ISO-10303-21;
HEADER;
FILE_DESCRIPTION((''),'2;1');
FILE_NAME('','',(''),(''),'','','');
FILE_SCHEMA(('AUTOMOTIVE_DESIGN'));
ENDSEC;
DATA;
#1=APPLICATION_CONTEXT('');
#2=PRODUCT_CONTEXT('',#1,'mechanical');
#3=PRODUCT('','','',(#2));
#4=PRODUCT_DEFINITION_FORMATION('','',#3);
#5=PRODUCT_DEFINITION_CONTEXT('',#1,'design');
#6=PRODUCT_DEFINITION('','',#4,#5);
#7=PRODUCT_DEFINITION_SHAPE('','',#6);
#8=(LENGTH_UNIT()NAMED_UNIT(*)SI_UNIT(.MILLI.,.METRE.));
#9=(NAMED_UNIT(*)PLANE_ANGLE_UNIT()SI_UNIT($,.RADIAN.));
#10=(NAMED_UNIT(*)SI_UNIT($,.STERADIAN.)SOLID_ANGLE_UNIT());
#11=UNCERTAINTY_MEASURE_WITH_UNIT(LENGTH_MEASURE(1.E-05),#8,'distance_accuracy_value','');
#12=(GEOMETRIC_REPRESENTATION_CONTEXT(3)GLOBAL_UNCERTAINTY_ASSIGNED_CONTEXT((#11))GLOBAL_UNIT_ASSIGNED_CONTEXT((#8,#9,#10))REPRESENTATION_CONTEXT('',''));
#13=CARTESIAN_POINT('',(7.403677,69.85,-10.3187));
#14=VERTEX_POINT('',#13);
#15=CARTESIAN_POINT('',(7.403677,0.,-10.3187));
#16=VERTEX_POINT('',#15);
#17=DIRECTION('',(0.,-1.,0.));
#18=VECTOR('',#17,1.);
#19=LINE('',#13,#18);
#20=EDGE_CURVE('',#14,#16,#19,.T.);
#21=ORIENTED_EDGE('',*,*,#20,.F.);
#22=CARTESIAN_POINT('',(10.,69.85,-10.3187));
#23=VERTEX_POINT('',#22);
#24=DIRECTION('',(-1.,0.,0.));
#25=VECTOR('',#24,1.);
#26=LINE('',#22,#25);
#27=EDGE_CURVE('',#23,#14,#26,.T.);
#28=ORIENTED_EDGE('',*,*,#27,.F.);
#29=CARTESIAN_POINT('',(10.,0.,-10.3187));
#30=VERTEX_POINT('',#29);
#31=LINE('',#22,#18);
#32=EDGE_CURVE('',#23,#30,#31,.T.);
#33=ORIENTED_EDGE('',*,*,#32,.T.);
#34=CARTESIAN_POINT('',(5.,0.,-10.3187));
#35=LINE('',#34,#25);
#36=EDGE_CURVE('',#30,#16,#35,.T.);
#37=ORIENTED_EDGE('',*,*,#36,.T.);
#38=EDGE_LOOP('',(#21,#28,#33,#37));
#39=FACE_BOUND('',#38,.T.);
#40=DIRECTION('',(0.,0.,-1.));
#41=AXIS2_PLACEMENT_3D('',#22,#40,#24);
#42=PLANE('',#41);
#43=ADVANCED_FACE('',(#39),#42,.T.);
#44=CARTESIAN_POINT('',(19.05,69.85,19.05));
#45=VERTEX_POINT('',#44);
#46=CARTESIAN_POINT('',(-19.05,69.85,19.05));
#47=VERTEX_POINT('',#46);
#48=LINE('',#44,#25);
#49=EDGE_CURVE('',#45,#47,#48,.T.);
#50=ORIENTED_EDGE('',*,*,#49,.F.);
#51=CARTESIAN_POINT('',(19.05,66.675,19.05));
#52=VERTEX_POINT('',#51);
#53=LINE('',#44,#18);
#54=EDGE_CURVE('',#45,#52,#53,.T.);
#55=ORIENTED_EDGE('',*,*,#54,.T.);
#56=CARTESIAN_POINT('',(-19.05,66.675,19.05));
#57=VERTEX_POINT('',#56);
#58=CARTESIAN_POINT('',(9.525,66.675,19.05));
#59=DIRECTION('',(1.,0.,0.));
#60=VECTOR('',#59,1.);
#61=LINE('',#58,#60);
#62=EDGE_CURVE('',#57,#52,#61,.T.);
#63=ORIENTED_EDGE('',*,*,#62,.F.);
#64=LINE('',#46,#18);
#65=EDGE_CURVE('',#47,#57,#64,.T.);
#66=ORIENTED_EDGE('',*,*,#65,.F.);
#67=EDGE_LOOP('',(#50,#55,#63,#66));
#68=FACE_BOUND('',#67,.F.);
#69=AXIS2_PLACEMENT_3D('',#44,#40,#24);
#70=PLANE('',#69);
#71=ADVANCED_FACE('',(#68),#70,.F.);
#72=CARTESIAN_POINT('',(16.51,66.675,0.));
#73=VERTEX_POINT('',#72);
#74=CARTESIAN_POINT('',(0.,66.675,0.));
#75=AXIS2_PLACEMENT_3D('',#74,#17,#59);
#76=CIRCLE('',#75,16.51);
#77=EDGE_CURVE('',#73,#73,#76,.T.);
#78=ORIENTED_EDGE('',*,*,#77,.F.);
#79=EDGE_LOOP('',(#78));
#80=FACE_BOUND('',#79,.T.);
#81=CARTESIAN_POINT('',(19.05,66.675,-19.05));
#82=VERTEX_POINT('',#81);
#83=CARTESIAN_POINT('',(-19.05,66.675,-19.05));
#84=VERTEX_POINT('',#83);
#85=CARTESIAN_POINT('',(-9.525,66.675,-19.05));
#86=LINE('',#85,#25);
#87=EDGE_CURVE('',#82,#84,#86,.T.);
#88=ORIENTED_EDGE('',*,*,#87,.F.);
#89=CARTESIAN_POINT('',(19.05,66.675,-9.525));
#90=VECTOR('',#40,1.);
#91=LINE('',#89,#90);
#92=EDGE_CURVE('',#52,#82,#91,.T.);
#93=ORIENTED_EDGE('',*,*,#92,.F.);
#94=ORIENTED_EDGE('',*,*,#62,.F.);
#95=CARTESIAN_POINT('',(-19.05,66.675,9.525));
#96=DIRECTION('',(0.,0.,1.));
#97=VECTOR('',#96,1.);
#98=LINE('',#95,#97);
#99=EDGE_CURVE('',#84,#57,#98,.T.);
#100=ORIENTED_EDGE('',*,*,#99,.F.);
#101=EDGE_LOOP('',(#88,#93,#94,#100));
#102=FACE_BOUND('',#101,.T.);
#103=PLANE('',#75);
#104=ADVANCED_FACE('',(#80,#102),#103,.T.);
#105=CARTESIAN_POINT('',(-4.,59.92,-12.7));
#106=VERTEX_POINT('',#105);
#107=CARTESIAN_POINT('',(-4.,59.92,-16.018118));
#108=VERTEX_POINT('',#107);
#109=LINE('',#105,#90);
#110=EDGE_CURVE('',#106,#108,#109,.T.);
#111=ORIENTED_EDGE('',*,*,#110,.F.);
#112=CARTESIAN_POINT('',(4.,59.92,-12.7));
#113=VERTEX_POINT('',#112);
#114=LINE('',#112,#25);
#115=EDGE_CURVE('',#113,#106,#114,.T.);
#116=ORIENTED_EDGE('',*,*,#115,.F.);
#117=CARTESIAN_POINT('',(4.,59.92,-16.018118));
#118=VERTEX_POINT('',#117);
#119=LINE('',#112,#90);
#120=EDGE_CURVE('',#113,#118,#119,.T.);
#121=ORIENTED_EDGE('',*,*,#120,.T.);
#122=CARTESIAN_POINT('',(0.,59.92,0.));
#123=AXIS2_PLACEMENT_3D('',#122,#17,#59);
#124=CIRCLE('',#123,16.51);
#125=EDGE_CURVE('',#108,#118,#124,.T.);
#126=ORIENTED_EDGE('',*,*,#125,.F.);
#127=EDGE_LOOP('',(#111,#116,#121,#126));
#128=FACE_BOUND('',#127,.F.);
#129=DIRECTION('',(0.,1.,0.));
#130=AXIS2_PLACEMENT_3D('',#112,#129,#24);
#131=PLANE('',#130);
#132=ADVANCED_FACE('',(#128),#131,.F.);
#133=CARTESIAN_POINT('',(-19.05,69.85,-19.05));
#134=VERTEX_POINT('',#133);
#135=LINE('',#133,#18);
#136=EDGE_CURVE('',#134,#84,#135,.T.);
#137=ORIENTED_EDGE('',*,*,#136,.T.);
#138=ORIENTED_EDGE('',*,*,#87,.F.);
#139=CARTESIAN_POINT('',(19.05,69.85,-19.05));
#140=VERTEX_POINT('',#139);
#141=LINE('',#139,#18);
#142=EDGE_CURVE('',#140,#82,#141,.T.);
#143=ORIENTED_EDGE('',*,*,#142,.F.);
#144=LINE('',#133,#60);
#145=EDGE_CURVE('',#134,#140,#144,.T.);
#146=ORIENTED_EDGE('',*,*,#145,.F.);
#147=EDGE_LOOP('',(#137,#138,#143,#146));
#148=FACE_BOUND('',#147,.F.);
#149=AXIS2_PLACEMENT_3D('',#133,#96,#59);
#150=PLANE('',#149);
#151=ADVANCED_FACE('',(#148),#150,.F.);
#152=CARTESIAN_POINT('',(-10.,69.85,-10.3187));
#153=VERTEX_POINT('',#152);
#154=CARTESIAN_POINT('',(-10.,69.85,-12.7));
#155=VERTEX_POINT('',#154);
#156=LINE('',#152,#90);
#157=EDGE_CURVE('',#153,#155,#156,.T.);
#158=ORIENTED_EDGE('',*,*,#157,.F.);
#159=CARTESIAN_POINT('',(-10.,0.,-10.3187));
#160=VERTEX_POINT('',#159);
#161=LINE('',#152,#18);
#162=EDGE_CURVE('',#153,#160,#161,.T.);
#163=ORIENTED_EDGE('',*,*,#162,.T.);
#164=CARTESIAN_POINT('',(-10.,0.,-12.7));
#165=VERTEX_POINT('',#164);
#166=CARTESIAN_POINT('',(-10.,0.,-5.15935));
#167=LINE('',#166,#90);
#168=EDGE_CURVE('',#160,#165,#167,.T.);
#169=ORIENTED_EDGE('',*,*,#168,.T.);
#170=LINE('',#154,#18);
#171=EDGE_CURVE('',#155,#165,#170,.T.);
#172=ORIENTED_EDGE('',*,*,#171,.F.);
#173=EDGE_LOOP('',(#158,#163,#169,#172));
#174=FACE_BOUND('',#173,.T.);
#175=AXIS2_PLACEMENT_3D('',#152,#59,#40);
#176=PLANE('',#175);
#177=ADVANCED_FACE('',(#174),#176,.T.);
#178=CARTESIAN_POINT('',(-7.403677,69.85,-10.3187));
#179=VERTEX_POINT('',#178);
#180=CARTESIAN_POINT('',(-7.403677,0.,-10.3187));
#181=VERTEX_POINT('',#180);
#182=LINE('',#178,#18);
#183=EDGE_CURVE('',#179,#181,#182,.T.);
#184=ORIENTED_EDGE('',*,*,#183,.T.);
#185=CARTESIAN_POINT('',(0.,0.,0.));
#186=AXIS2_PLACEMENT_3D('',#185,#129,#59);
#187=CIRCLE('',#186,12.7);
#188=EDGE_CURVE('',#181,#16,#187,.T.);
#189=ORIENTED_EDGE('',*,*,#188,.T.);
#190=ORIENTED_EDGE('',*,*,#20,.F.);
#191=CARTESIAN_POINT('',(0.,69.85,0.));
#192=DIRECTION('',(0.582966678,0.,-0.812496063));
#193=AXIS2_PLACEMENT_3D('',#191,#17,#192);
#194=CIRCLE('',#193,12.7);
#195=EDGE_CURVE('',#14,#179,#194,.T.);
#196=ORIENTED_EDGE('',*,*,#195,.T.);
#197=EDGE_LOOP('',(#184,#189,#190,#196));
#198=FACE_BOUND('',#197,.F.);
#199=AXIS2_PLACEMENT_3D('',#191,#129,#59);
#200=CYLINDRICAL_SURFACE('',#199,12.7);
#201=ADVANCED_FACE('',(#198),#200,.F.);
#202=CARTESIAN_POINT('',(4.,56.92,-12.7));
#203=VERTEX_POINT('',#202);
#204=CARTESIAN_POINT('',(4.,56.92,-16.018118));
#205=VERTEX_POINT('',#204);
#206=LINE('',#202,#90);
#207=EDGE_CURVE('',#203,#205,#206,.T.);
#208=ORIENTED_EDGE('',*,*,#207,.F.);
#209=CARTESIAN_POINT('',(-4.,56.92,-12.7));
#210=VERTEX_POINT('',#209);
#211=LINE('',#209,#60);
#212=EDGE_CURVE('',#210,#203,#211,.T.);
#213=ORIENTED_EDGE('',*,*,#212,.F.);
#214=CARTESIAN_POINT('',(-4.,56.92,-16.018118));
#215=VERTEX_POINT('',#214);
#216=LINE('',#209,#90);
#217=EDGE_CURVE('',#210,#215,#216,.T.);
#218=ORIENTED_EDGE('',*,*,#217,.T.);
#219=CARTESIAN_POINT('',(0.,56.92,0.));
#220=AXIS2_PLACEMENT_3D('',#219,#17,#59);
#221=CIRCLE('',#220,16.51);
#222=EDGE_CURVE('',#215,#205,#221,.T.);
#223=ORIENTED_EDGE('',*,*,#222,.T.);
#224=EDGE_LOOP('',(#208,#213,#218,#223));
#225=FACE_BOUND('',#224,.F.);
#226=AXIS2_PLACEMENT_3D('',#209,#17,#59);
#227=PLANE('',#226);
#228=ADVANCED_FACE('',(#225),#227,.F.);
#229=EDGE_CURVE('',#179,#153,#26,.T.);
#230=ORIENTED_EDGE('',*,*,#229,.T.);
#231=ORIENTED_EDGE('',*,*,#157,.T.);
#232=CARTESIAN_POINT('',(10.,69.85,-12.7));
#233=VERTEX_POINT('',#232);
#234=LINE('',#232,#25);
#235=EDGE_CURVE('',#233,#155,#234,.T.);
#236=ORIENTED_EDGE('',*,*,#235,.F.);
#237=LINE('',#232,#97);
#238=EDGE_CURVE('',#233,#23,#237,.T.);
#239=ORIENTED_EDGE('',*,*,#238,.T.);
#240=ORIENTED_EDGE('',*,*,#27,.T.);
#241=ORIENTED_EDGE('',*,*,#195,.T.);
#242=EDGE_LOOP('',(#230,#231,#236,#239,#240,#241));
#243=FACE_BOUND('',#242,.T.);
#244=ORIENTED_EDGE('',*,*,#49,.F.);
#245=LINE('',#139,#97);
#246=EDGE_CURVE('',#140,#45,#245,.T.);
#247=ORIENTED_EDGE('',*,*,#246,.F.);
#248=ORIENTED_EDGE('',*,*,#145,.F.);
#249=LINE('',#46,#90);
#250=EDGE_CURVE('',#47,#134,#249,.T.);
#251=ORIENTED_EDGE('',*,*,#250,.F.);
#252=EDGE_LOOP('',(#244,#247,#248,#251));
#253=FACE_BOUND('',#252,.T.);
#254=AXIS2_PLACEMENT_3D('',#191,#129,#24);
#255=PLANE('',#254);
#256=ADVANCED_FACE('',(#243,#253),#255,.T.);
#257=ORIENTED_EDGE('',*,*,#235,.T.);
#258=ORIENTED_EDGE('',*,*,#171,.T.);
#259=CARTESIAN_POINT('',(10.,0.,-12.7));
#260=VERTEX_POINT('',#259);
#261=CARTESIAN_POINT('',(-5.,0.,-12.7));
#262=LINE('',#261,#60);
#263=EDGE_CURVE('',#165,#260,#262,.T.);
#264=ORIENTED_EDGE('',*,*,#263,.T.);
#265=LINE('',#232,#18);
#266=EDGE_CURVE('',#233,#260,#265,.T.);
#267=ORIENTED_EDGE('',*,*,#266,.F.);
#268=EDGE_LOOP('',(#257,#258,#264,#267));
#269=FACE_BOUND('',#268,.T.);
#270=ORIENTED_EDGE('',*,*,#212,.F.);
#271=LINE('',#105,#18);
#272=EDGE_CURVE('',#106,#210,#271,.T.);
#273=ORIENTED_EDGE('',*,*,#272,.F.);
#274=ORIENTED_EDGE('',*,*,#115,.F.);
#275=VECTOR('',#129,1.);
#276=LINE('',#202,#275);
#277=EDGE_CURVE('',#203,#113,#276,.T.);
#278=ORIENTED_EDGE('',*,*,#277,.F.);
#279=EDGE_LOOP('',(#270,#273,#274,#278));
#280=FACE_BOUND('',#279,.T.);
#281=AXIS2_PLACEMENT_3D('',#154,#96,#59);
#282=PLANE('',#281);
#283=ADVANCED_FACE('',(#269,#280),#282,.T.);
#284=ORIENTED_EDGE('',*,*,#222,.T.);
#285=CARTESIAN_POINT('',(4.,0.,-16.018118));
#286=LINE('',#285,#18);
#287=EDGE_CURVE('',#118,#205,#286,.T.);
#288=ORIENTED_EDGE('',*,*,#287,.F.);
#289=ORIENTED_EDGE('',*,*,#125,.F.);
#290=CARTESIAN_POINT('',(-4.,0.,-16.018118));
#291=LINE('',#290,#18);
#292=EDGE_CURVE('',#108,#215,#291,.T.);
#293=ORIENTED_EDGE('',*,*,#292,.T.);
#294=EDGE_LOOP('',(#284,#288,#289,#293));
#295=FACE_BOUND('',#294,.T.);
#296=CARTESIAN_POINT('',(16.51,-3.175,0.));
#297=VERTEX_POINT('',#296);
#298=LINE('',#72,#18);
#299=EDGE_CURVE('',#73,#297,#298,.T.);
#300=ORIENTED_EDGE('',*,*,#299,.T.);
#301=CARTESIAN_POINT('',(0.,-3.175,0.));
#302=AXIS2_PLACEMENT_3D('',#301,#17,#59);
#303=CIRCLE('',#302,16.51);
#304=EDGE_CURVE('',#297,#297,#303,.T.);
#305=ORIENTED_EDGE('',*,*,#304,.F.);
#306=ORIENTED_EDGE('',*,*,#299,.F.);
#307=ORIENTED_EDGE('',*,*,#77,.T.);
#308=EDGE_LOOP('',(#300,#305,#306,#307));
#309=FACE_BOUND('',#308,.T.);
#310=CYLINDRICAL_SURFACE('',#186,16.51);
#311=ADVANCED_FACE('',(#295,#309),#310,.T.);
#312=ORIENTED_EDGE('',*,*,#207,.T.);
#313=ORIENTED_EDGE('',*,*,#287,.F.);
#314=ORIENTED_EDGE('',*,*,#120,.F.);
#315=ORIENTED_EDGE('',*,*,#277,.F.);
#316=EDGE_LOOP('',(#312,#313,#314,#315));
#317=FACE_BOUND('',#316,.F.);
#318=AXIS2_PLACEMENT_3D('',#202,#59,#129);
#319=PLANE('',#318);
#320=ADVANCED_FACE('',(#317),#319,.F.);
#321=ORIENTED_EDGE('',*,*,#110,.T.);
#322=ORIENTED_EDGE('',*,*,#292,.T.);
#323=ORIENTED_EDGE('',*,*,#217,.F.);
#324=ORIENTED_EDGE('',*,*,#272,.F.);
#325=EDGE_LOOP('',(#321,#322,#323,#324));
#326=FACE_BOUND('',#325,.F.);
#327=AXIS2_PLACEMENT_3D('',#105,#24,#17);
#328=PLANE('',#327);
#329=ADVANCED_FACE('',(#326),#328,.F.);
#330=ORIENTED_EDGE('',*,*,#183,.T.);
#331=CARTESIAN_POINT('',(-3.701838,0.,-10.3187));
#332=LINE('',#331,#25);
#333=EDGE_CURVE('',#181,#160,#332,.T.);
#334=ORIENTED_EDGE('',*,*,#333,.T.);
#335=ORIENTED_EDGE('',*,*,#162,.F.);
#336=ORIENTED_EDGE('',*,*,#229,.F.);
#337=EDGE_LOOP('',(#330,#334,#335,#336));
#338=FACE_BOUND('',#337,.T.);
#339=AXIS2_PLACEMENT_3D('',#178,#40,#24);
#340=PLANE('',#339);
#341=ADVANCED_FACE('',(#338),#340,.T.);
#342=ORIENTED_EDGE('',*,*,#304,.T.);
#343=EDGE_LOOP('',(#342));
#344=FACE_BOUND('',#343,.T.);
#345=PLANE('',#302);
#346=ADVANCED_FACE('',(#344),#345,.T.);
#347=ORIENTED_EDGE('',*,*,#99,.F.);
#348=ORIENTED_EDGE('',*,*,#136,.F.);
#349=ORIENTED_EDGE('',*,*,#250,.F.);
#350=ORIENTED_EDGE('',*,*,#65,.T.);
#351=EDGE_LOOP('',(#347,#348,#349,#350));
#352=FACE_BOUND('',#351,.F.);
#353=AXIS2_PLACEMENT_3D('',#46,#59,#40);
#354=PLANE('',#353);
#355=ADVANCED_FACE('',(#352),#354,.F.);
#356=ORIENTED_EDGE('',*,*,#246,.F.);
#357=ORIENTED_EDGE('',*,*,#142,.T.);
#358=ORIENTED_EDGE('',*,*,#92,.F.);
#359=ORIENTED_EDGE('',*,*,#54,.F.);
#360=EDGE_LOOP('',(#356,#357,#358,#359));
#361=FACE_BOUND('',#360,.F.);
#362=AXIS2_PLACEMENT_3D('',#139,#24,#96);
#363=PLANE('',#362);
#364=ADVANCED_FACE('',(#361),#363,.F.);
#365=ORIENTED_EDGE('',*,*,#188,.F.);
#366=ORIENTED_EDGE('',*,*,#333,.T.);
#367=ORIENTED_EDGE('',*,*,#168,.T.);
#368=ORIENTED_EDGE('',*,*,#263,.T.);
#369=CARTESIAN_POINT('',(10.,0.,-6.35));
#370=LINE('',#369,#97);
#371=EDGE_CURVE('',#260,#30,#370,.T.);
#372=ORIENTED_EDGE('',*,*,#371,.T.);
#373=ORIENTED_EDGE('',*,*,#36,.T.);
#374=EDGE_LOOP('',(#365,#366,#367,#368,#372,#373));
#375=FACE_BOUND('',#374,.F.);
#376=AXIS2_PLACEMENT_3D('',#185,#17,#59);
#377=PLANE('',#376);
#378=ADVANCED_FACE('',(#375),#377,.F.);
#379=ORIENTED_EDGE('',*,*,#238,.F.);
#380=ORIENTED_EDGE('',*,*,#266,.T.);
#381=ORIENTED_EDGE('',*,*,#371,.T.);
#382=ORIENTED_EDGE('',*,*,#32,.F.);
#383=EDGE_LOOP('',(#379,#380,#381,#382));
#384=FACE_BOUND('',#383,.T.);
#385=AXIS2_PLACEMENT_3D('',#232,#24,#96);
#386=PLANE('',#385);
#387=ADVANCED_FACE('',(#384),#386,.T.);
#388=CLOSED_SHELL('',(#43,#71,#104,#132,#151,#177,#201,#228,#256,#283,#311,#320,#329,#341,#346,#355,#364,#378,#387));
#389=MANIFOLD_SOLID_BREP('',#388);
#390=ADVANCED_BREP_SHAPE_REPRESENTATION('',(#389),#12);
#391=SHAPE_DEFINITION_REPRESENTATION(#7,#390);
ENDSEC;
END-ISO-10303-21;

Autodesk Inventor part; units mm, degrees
ref_plane "YZ Plane" through (0, 0, 0) normal (1, 0, 0) x (0, 1, 0)
ref_plane "XZ Plane" through (0, 0, 0) normal (0, 1, 0) x (-1, 0, 0)
ref_plane "XY Plane" through (0, 0, 0) normal (0, 0, 1) x (1, 0, 0)
sketch "Sketch1" plane through (0, 0, 0) normal (0, 1, 0) x (-1, 0, 0)
  line L0 (31.75, -31.75) -> (-31.75, -31.75)
  line L1 (-31.75, -31.75) -> (-31.75, 31.75)
  line L2 (-31.75, 31.75) -> (31.75, 31.75)
  line L3 (31.75, 31.75) -> (31.75, -31.75)
  point P0 (0, 0)
  point P1 (-31.75, 0)
  point P2 (0, -31.75)
  dimension "d0" = 63.5
  dimension "d1" = 63.5
extrude "Extrusion1" add sketch "Sketch1" along normal blind 69.85
sketch "Sketch2" plane through (0, 69.85, 0) normal (0, 1, 0) x (1, 0, 0)
  circle A0 centre (0, 0) radius 12.7
  line L0 (-10, 12.7) -> (10, 12.7)
  line L1 (10, 12.7) -> (10, 10.3187)
  line L2 (10, 10.3187) -> (-10, 10.3187)
  line L3 (-10, 10.3187) -> (-10, 12.7)
  point P0 (-12.7, 0)
  point P1 (12.7, 0)
  point P2 (0, 12.7)
  point P3 (-7.4036, 10.3187)
  point P4 (0, 7.5)
  point P5 (7.4036, 10.3187)
  dimension "d4" = 25.4
  dimension "d7" = 20
  dimension "d8" = 2.3813
extrude "Extrusion2" cut sketch "Sketch2" against normal through all
sketch "Sketch4" plane through (0, 69.85, 0) normal (0, 1, 0) x (1, 0, 0)
  circle A0 centre (0, 0) radius 16.51
  line L0 (-23.2494, 25.4) -> (-10.5494, 25.4)
  line L1 (-10.5494, 25.4) -> (-10.5494, 12.7)
  line L2 (-10.5494, 12.7) -> (-23.2494, 12.7)
  line L3 (-23.2494, 12.7) -> (-23.2494, 25.4)
  line L4 (-31.75, 31.75) -> (-31.75, -31.75) projected
  line L5 (-31.75, 0) -> (31.75, 0)
  line L6 (10.5494, 25.4) -> (23.2494, 25.4)
  line L7 (23.2494, 25.4) -> (23.2494, 12.7)
  line L8 (23.2494, 12.7) -> (10.5494, 12.7)
  line L9 (10.5494, 12.7) -> (10.5494, 25.4)
  line L10 (10.5494, -12.7) -> (23.2494, -12.7)
  line L11 (23.2494, -12.7) -> (23.2494, -25.4)
  line L12 (23.2494, -25.4) -> (10.5494, -25.4)
  line L13 (10.5494, -25.4) -> (10.5494, -12.7)
  line L14 (-23.2494, -12.7) -> (-10.5494, -12.7)
  line L15 (-10.5494, -12.7) -> (-10.5494, -25.4)
  line L16 (-10.5494, -25.4) -> (-23.2494, -25.4)
  line L17 (-23.2494, -25.4) -> (-23.2494, -12.7)
  line L18 (-23.2494, 25.4) -> (23.2494, 25.4)
  line L19 (23.2494, 25.4) -> (23.2494, -25.4)
  line L20 (23.2494, -25.4) -> (-23.2494, -25.4)
  line L21 (-23.2494, -25.4) -> (-23.2494, 25.4)
  line L22 (31.75, -31.75) -> (31.75, 31.75) projected
  line L23 (-31.75, 31.75) -> (31.75, 31.75)
  line L24 (31.75, 31.75) -> (31.75, -31.75)
  line L25 (31.75, -31.75) -> (-31.75, -31.75)
  line L26 (-31.75, -31.75) -> (-31.75, 31.75)
  dimension "d10" = 33.02
  dimension "d11" = 12.7
  dimension "d12" = 12.7
  dimension "d13" = 12.7
  dimension "d14" = 12.7
  dimension "d15" = 12.7
  dimension "d16" = 12.7
  dimension "d17" = 12.7
  dimension "d18" = 12.7
  dimension "d19" = 12.7
  dimension "d20" = 12.7
  dimension "d21" = 12.7
  dimension "d22" = 12.7
sketch "Sketch5" plane through (0, 69.85, 0) normal (0, 1, 0) x (1, 0, 0)
  point P0 (0, 0)
extrude "Extrusion3" cut sketch "Sketch4" against normal blind 50.8 contours L19 L7 L6 L18 L0 L3 L21 L5 L4 L23 L22 | L5 L22 L25 L4 L21 L17 L16 L20 L12 L11 L19
sketch "Sketch6" plane through (0, 69.85, 0) normal (0, 1, 0) x (1, 0, 0)
  point P0 (0, 0)
sketch "Sketch7" plane through (0, 0, 0) normal (0, -1, 0) x (1, 0, 0)
  circle A0 centre (0, 0) radius 16.51
  line L0 (-23.2494, 25.4) -> (23.2494, 25.4) projected
  line L1 (23.2494, 25.4) -> (23.2494, -25.4) projected
  line L2 (-23.2494, 25.4) -> (23.2494, 25.4)
  line L3 (23.2494, 25.4) -> (23.2494, -25.4)
  line L4 (23.2494, -25.4) -> (-23.2494, -25.4)
  line L5 (-23.2494, -25.4) -> (-23.2494, 25.4)
  dimension "d25" = 33.02
extrude "Extrusion4" cut sketch "Sketch7" against normal blind 66.675
sketch "Sketch9" plane through (0, 69.85, 0) normal (0, 1, 0) x (1, 0, 0)
  line L0 (-19.05, 19.05) -> (19.05, 19.05)
  line L1 (19.05, 19.05) -> (19.05, -19.05)
  line L2 (19.05, -19.05) -> (-19.05, -19.05)
  line L3 (-19.05, -19.05) -> (-19.05, 19.05)
  line L4 (23.2494, -25.4) -> (23.2494, 25.4) projected
  line L5 (-23.2494, 25.4) -> (23.2494, 25.4)
  line L6 (23.2494, 25.4) -> (23.2494, -25.4)
  line L7 (23.2494, -25.4) -> (-23.2494, -25.4)
  line L8 (-23.2494, -25.4) -> (-23.2494, 25.4)
  line L9 (31.75, -31.75) -> (-31.75, -31.75) projected
  line L10 (-31.75, -31.75) -> (-31.75, 31.75) projected
  line L11 (31.75, -31.75) -> (-31.75, -31.75)
  line L12 (-31.75, -31.75) -> (-31.75, 31.75)
  line L13 (-31.75, 31.75) -> (31.75, 31.75)
  line L14 (31.75, 31.75) -> (31.75, -31.75)
  point P0 (0, 0)
  point P1 (0, 19.05)
  point P2 (19.05, 0)
  point P3 (23.2494, 25.4)
  dimension "d42" = 38.1
  dimension "d43" = 38.1
extrude "Extrusion6" cut sketch "Sketch9" against normal through all contours L7 L8 L5 L4 | L9 L10 L13 L14
sketch "Sketch21" plane through (0, 0, 0) normal (0, -1, 0) x (1, 0, 0)
  arc A0 (7.4036, -10.3187) -> (-7.4036, -10.3187) centre (0, 0) ccw projected
  circle A1 centre (0, 0) radius 16.51
extrude "Extrusion15" add sketch "Sketch21" along normal blind 3.175
sketch "Sketch22" plane through (-10, 69.85, -12.7) normal (0, 0, 1) x (1, 0, 0)
  line L0 (20, -69.85) -> (0, -69.85) projected
  line L1 (6, -12.93) -> (14, -12.93)
  line L2 (14, -12.93) -> (14, -9.93)
  line L3 (14, -9.93) -> (6, -9.93)
  line L4 (6, -9.93) -> (6, -12.93)
  line L5 (29.05, 0) -> (-9.05, 0) projected
  point P0 (10, -69.85)
  point P1 (10, -11.43)
  point P2 (14, -11.43)
  point P3 (10, -9.93)
  dimension "d87" = 58.42
  dimension "d88" = 8
  dimension "d89" = 3
  dimension "d92" = 11.43
extrude "Extrusion16" cut sketch "Sketch22" against normal blind 6.35
properties part number "WaterCollector_3DPrint"
